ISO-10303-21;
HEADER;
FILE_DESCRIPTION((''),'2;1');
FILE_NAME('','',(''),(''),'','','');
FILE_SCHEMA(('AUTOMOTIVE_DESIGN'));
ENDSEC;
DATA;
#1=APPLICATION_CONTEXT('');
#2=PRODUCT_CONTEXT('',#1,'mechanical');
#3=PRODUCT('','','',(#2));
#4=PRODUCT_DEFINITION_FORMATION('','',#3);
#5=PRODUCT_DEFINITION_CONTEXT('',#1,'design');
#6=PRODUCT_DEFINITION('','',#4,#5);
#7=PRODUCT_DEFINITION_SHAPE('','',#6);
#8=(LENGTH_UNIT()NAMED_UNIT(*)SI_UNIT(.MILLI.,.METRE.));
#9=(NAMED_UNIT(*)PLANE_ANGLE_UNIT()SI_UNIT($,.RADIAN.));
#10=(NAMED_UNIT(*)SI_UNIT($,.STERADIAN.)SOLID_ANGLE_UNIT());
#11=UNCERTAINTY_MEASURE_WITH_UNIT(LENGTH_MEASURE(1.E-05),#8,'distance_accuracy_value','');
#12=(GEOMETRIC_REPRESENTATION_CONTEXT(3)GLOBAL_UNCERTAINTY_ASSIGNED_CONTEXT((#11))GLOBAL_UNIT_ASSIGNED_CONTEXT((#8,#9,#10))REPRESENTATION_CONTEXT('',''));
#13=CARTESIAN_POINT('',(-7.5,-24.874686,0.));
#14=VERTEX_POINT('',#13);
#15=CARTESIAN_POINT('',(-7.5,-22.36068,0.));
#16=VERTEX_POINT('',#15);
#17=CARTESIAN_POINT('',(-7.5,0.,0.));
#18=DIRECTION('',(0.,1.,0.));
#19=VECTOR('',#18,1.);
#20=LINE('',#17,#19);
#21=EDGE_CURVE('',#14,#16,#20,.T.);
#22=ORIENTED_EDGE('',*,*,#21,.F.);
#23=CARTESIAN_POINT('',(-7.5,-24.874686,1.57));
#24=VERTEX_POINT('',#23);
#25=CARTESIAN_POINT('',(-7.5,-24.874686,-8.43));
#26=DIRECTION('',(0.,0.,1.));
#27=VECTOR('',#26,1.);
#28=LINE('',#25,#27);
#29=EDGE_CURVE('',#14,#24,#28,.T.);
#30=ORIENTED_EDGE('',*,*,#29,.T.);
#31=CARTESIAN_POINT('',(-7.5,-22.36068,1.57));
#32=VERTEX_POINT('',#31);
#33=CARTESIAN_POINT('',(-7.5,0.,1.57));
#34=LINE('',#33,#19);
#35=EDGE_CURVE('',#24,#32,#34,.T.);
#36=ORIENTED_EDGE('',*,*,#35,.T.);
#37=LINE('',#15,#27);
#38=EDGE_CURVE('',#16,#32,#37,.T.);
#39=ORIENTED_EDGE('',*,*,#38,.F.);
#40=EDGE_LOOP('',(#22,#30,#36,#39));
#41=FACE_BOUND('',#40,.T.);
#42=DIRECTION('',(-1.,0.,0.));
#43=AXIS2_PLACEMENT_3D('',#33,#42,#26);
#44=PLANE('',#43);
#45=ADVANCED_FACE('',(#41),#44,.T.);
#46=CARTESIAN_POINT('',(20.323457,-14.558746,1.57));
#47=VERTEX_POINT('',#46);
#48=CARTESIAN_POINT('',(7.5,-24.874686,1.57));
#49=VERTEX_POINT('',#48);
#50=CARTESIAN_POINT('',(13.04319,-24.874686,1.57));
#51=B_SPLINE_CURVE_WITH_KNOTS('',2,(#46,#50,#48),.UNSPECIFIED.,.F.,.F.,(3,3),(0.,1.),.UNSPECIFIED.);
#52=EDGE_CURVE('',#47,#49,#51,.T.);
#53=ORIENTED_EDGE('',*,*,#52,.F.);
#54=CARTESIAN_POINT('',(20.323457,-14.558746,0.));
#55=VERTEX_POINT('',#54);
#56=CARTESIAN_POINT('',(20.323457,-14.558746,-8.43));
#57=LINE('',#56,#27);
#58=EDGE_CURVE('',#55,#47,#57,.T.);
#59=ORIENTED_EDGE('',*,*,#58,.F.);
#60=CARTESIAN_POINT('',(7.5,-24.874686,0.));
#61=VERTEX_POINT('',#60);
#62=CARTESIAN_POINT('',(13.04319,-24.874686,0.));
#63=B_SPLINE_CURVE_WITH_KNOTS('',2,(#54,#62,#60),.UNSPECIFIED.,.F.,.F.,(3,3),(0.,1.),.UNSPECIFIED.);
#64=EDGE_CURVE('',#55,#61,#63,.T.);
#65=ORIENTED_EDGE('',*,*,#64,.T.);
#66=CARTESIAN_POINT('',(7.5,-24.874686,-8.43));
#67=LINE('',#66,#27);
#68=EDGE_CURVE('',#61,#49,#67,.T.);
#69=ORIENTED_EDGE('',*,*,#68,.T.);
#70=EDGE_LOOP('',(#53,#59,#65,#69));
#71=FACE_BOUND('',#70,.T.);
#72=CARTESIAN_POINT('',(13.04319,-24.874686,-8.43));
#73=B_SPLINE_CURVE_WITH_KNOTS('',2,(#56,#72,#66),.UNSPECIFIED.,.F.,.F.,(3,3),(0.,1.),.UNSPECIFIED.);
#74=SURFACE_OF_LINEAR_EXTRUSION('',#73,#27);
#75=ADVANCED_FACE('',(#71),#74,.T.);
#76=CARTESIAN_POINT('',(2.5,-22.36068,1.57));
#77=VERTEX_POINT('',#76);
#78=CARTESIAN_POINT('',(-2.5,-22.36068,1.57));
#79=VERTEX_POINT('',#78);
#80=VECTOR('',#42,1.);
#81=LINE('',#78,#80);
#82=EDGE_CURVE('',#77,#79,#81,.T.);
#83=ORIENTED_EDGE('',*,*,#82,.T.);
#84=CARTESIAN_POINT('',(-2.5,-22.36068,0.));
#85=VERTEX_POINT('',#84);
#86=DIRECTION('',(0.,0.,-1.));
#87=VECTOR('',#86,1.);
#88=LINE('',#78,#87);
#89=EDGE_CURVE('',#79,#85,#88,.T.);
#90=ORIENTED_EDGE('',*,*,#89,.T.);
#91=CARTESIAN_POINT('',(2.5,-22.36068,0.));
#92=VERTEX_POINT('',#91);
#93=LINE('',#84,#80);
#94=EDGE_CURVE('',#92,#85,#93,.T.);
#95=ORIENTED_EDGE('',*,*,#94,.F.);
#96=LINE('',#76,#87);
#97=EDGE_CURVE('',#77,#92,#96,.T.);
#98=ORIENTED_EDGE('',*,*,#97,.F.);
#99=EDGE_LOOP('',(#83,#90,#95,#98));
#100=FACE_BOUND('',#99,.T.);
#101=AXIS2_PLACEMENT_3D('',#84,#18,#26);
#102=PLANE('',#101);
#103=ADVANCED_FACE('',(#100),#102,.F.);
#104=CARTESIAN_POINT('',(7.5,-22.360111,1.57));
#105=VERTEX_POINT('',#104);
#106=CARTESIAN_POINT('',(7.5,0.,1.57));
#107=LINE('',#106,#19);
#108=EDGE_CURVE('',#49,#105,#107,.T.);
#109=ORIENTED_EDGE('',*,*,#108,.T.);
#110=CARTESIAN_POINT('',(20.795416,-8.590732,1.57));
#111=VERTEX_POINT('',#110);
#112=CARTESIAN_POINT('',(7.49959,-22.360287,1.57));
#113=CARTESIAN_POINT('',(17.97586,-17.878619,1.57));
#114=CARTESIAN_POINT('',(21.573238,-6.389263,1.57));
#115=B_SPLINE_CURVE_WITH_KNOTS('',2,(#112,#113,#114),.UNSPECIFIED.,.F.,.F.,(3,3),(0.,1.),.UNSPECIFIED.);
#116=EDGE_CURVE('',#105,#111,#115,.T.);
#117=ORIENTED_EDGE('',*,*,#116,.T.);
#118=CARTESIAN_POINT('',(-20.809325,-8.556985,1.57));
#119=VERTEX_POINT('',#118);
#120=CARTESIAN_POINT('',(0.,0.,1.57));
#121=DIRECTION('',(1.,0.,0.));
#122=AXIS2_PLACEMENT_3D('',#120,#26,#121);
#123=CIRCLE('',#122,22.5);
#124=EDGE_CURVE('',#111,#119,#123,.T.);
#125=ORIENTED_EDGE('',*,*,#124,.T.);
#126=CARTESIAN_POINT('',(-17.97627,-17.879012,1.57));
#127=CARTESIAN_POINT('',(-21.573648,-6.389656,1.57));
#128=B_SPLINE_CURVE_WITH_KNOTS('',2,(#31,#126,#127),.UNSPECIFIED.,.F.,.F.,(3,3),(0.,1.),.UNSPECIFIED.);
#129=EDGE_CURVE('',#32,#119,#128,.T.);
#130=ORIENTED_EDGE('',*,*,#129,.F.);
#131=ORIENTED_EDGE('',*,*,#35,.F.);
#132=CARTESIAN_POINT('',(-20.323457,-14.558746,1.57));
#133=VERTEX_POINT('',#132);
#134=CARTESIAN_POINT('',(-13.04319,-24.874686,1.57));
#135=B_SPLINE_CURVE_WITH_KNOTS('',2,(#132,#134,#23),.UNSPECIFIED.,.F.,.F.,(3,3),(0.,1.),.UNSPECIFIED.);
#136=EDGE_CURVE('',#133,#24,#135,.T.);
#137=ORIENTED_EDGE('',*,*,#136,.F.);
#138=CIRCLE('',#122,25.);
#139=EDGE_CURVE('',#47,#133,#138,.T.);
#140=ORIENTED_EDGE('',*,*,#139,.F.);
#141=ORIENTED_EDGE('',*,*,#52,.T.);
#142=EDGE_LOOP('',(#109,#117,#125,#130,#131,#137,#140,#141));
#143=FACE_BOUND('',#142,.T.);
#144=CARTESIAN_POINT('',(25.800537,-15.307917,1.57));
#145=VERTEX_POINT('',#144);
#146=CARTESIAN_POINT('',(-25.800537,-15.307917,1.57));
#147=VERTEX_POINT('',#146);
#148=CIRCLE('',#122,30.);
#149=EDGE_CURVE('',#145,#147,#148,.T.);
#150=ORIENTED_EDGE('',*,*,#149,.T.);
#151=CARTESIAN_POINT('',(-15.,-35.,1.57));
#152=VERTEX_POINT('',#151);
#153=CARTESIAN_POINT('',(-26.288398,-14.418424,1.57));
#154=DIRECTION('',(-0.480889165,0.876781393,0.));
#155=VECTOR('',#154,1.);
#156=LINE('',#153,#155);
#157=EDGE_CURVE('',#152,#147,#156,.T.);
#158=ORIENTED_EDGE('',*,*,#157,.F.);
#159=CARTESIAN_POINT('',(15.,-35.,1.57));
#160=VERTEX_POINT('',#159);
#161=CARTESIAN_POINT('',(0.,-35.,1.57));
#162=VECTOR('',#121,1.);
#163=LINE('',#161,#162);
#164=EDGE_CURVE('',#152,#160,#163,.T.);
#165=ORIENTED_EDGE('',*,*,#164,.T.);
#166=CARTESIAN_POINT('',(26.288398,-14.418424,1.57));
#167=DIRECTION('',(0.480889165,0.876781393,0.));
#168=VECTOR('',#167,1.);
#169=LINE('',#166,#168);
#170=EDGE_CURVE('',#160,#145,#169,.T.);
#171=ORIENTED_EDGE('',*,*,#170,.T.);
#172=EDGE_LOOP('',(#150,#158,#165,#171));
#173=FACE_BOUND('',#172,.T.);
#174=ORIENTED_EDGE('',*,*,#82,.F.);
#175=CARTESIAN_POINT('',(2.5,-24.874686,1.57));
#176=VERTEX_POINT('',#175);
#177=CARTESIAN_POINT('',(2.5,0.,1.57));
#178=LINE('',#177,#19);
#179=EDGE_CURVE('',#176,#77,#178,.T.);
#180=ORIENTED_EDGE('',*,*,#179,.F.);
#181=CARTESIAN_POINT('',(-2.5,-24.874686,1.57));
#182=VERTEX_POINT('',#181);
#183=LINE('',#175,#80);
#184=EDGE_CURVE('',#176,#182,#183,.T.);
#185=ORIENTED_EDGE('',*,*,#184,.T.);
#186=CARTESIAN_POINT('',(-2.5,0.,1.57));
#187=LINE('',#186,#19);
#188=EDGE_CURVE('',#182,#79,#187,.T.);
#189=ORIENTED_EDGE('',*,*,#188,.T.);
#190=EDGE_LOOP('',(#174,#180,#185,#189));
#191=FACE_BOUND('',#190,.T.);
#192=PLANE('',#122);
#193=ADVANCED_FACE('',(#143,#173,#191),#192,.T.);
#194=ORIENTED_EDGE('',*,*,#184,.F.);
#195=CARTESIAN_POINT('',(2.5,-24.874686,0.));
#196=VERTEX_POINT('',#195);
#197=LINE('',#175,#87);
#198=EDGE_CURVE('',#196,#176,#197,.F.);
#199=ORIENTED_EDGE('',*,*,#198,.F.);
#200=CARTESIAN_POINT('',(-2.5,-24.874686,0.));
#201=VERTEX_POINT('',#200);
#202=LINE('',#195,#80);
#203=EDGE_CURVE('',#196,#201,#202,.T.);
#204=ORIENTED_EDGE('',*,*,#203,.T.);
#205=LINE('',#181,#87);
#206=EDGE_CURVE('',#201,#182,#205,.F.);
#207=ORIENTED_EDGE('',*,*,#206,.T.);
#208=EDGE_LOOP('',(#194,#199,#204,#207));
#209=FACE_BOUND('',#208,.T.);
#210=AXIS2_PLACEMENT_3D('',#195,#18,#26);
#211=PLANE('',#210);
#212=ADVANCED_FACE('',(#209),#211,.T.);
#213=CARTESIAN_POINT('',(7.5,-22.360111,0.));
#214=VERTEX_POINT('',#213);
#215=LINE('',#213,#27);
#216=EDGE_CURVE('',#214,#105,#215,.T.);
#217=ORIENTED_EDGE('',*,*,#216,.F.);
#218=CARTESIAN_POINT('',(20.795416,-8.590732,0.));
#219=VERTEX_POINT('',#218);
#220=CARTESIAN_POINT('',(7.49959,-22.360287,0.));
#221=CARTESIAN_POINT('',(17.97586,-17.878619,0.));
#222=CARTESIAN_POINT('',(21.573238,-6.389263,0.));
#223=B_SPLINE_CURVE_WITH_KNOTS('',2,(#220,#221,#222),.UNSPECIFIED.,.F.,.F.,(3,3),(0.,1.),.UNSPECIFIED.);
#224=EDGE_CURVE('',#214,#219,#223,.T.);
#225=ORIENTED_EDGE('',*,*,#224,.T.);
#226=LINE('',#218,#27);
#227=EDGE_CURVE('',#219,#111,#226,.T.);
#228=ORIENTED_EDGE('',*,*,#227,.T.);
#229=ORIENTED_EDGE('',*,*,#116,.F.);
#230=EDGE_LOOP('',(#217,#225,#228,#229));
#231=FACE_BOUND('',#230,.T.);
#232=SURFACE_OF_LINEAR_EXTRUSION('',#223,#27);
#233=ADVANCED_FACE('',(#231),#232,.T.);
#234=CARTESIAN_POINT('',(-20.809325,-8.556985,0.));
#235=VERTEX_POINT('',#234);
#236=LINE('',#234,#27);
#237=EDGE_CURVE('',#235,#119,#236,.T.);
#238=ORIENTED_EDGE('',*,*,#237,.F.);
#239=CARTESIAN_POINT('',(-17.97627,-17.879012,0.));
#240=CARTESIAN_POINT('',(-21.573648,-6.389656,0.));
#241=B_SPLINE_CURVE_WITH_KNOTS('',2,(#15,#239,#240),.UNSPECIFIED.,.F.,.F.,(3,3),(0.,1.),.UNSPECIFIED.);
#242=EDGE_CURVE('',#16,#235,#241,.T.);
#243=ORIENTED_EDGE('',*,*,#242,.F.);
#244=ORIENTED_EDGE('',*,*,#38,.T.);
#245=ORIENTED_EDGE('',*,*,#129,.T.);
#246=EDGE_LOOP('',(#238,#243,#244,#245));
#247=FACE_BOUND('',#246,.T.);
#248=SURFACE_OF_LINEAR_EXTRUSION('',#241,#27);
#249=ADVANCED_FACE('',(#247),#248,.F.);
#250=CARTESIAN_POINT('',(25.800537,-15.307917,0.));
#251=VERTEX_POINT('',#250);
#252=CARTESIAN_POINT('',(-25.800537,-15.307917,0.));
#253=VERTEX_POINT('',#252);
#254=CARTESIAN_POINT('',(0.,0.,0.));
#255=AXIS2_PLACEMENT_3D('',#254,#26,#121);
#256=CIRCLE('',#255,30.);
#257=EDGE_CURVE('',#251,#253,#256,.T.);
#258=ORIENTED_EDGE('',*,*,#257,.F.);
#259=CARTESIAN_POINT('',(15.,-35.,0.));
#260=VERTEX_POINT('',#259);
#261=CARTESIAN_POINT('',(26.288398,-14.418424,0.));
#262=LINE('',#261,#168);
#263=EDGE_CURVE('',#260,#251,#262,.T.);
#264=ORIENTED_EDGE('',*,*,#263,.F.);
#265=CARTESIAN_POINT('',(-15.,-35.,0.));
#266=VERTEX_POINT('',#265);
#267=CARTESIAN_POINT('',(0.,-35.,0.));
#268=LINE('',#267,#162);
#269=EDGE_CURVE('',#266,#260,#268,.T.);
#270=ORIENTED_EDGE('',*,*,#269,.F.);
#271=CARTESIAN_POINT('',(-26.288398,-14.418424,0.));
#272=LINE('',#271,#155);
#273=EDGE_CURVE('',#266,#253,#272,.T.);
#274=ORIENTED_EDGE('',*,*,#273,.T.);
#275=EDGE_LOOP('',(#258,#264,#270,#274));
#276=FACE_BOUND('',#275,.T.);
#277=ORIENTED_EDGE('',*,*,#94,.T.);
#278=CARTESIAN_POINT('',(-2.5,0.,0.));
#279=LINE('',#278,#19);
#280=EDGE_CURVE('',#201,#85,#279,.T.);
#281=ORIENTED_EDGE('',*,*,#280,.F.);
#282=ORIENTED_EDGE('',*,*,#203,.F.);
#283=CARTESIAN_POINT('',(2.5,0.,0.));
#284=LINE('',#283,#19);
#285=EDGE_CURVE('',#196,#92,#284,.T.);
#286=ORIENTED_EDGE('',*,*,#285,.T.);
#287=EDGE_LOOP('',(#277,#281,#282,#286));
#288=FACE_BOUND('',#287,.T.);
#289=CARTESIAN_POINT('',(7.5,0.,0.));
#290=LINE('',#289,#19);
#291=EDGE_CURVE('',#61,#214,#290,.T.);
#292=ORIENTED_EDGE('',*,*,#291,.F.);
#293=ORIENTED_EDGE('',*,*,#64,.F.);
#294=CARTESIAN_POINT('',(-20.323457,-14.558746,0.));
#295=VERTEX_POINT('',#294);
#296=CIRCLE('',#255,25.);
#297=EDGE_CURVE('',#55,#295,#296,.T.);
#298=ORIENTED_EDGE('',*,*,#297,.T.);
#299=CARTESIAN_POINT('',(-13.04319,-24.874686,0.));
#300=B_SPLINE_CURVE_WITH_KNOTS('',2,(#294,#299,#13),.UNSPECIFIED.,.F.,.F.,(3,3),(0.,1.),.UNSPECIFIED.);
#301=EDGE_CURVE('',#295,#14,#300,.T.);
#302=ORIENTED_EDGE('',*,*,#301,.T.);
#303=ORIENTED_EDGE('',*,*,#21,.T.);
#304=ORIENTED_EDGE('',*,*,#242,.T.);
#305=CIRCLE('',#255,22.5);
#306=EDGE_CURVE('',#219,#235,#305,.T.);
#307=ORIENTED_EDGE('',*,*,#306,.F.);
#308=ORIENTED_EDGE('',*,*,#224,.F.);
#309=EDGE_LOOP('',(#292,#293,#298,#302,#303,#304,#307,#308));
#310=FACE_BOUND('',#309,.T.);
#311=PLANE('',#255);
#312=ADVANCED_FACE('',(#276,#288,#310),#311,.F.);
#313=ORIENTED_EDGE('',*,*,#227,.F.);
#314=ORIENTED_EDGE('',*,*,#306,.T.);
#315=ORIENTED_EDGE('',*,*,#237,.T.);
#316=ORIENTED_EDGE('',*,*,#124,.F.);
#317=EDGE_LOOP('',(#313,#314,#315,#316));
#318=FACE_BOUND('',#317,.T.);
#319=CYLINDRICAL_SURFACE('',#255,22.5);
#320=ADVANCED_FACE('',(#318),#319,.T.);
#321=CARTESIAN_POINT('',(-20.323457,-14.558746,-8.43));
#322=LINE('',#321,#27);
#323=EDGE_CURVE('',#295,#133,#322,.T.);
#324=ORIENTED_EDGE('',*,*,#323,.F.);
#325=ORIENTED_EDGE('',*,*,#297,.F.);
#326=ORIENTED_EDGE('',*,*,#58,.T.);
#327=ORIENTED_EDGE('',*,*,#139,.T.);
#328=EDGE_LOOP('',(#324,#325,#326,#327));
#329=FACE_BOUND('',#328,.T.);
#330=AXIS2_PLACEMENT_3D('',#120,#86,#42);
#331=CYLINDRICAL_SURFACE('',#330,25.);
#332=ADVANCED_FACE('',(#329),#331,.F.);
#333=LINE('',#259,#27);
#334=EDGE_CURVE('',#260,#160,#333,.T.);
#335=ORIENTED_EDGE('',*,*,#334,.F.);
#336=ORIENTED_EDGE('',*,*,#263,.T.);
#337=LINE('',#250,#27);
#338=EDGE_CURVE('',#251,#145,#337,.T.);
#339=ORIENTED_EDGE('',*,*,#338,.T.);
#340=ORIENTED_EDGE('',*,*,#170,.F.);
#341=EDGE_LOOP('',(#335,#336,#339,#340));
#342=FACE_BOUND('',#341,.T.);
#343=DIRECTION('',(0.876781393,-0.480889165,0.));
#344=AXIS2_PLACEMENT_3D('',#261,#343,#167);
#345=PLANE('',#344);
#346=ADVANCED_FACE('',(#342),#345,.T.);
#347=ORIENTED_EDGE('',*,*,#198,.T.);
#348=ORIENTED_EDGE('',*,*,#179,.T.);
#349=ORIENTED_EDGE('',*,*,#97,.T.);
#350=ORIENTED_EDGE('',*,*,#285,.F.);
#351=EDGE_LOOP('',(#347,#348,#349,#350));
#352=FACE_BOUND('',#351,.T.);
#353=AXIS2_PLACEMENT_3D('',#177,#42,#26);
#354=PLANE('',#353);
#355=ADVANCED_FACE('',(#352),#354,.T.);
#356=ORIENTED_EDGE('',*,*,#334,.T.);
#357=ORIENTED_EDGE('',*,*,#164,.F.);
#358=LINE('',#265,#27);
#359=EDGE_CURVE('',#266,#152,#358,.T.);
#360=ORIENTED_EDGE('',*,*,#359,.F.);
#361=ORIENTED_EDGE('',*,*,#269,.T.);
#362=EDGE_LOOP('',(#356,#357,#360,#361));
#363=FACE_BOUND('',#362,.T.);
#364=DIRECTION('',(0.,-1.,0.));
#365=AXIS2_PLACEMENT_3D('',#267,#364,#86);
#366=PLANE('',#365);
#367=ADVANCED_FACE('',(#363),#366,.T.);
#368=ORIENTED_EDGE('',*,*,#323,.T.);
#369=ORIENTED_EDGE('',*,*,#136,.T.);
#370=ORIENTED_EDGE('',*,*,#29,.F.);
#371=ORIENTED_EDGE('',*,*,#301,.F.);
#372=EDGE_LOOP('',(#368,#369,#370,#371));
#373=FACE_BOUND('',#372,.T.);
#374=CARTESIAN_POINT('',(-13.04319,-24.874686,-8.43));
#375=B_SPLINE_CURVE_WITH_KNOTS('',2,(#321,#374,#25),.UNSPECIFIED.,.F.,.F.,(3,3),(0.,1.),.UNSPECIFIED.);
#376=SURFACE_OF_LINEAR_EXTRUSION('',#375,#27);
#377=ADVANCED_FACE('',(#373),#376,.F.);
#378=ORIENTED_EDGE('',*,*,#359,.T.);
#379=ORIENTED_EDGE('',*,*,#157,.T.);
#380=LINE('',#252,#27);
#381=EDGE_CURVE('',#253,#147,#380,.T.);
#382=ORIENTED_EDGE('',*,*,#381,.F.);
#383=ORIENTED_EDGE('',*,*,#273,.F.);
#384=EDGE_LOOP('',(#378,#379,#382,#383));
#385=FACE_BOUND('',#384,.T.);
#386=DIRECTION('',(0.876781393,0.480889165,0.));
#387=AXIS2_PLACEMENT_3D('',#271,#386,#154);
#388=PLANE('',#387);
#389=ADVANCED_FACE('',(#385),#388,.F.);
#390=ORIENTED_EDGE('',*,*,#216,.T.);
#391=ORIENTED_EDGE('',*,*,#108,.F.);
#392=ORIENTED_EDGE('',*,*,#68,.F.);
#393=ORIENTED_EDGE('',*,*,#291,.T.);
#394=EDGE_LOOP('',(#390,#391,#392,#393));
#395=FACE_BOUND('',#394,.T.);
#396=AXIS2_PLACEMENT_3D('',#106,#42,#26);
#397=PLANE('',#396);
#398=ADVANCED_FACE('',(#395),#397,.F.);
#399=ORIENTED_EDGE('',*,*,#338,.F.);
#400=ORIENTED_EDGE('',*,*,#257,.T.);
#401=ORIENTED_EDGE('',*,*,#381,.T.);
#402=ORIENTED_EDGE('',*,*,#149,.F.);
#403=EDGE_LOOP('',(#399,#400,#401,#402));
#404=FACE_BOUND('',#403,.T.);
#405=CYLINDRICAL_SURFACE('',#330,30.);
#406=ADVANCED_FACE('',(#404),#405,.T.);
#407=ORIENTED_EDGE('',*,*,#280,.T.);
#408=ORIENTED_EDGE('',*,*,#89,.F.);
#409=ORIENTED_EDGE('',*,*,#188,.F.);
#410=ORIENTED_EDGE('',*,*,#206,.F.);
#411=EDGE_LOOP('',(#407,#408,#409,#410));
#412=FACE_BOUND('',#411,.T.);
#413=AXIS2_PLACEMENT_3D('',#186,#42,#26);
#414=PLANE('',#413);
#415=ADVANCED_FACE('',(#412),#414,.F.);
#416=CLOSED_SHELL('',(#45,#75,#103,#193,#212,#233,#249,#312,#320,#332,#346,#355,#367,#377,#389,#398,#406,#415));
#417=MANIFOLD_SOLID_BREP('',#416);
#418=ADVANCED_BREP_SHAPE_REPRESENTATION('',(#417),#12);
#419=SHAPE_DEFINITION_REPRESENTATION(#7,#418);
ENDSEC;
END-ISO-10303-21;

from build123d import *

# Parameters (mm, degrees)
ESBO_O1_R           = 30
ESBO_O1_R_2         = 25
BOSS_EXTRUDE1_DEPTH = 1.57
BOSS_EXTRUDE2_START = -1.57
BOSS_EXTRUDE2_DEPTH = 1.57
BOSS_EXTRUDE3_DEPTH = 1.57
BOSS_EXTRUDE4_START = -1.57
SKETCH4_R           = 22.5
BOSS_EXTRUDE4_DEPTH = 1.57
BOSS_EXTRUDE5_START = -1.57
BOSS_EXTRUDE5_DEPTH = 1.57
CUT_EXTRUDE1_START  = -1.57
CUT_EXTRUDE1_DEPTH  = 1.57
CUT_EXTRUDE2_START  = -10
CUT_EXTRUDE2_DEPTH  = 10
EXTRUDE_THIN2_START = -1.57
EXTRUDE_THIN2_DEPTH = 1.57
BOSS_EXTRUDE9_DEPTH = 1.57


# Read off the part's stored shape, not the designer's step: Extrude-Thin2
with BuildPart() as part:
    # Esboço1 → Boss-Extrude1 (new body)
    with BuildSketch(Plane.XY):
        Circle(ESBO_O1_R)
        Circle(ESBO_O1_R_2, mode=Mode.SUBTRACT)
    extrude(amount=BOSS_EXTRUDE1_DEPTH)

    # Sketch1 → Boss-Extrude2 (add)
    with BuildSketch(Plane.XY.offset(1.57).offset(BOSS_EXTRUDE2_START)):
        with BuildLine():
            Line((-25.800536663, -15.307916512), (-15, -35))
            Line((-15, -35), (-15, -25.980762114))
            ThreePointArc((-15, -25.980762114), (-21.086686707, -21.338970071), (-25.800536663, -15.307916512))
        make_face()
        with BuildLine():
            Line((-15, -35), (0, -35))
            Line((0, -35), (0, -30))
            ThreePointArc((0, -30), (-7.764571353, -28.977774789), (-15, -25.980762114))
            Line((-15, -25.980762114), (-15, -35))
        make_face()
        with BuildLine():
            Line((0, -35), (15, -35))
            Line((15, -35), (15, -25.980762114))
            ThreePointArc((15, -25.980762114), (7.764571353, -28.977774789), (0, -30))
            Line((0, -30), (0, -35))
        make_face()
        with BuildLine():
            Line((15, -25.980762114), (15, -35))
            Line((15, -35), (25.800536663, -15.307916512))
            ThreePointArc((25.800536663, -15.307916512), (21.086686707, -21.338970071), (15, -25.980762114))
        make_face()
    extrude(amount=BOSS_EXTRUDE2_DEPTH)

    # Sketch2 → Boss-Extrude3 (add)
    with BuildSketch(Plane.XY):
        with BuildLine():
            Line((-2.5, -25), (-2.5, -22.360679775))
            ThreePointArc((-2.5, -22.360679775), (-5.0328099, -21.929907079), (-7.5, -21.213203436))
            Line((-7.5, -21.213203436), (-7.5, -25))
            Line((-7.5, -25), (-2.5, -25))
        make_face()
        with BuildLine():
            ThreePointArc((7.5, -21.213203436), (5.0328099, -21.929907079), (2.5, -22.360679775))
            Line((2.5, -22.360679775), (2.5, -25))
            Line((2.5, -25), (7.5, -25))
            Line((7.5, -25), (7.5, -21.213203436))
        make_face()
    extrude(amount=BOSS_EXTRUDE3_DEPTH)

    # Sketch4 → Boss-Extrude4 (add)
    with BuildSketch(Plane.XY.offset(1.57).offset(BOSS_EXTRUDE4_START)):
        Circle(SKETCH4_R)
    extrude(amount=BOSS_EXTRUDE4_DEPTH)

    # Sketch5 → Boss-Extrude5 (add)
    with BuildSketch(Plane.XY.offset(1.57).offset(BOSS_EXTRUDE5_START)):
        with BuildLine():
            Line((2.5, -24.874685928), (-2.5, -24.874685928))
            ThreePointArc((-2.5, -24.874685928), (0, -25), (2.5, -24.874685928))
        make_face()
    extrude(amount=BOSS_EXTRUDE5_DEPTH)

    # Sketch6 → Cut-Extrude1 (cut)
    with BuildSketch(Plane.XY.offset(1.57).offset(CUT_EXTRUDE1_START)):
        with BuildLine():
            Line((-2.5, -22.360679775), (2.5, -22.360679775))
            ThreePointArc((2.5, -22.360679775), (0, -22.5), (-2.5, -22.360679775))
        make_face()
    extrude(amount=CUT_EXTRUDE1_DEPTH, mode=Mode.SUBTRACT)

    # Sketch7 → Cut-Extrude2 (cut)
    with BuildSketch(Plane.XY.offset(1.57).offset(CUT_EXTRUDE2_START)):
        with BuildLine():
            add(Edge.make_bspline(
                [(-20.323456945, -14.558746437), (-13.043190103, -24.874685928), (-7.5, -24.874685928)],
                knots=[0, 0, 0, 1, 1, 1], degree=2))
            Line((-7.5, -24.874685928), (-7.5, -23.848480035))
            ThreePointArc((-7.5, -23.848480035), (-14.666662084, -20.245716172), (-20.323456945, -14.558746437))
        make_face()
        with BuildLine():
            add(Edge.make_bspline(
                [(20.323456945, -14.558746437), (13.043190103, -24.874685928), (7.5, -24.874685928)],
                knots=[0, 0, 0, 1, 1, 1], degree=2))
            ThreePointArc((20.323456945, -14.558746437), (14.666662084, -20.245716172), (7.5, -23.848480035))
            Line((7.5, -23.848480035), (7.5, -24.874685928))
        make_face()
    extrude(amount=CUT_EXTRUDE2_DEPTH, mode=Mode.SUBTRACT)

    # Extrude-Thin2 outline → Extrude-Thin2 (add)
    with BuildSketch(Plane.XY.offset(1.57).offset(EXTRUDE_THIN2_START)):
        with BuildLine():
            add(Edge.make_bspline(
                [(-7.5, -22.360679775), (-16.957974034, -18.314631092), (-20.809324876, -8.556985344)],
                knots=[0, 0, 0, 0.902799725, 0.902799725, 0.902799725], degree=2))
            Line((-7.5, -22.360679775), (-7.5, -21.213203436))
            ThreePointArc((-7.5, -21.213203436), (-15.504819665, -16.30492463), (-20.809324876, -8.556985344))
        make_face()
    extrude(amount=EXTRUDE_THIN2_DEPTH)

    # Sketch10 → Boss-Extrude9 (add)
    with BuildSketch(Plane.XY.offset(1.57)):
        with BuildLine():
            Line((2.499590074, -22.36028679), (2.499590074, -20.208780459))
            Line((2.499590074, -20.208780459), (21.573238209, -6.389263197))
            add(Edge.make_bspline(
                [(7.499590074, -22.36028679), (17.975860478, -17.878618737), (21.573238209, -6.389263197)],
                knots=[0, 0, 0, 1, 1, 1], degree=2))
            Line((7.499590074, -22.36028679), (2.499590074, -22.36028679))
        make_face()
    extrude(amount=-BOSS_EXTRUDE9_DEPTH)


solid = part.part
